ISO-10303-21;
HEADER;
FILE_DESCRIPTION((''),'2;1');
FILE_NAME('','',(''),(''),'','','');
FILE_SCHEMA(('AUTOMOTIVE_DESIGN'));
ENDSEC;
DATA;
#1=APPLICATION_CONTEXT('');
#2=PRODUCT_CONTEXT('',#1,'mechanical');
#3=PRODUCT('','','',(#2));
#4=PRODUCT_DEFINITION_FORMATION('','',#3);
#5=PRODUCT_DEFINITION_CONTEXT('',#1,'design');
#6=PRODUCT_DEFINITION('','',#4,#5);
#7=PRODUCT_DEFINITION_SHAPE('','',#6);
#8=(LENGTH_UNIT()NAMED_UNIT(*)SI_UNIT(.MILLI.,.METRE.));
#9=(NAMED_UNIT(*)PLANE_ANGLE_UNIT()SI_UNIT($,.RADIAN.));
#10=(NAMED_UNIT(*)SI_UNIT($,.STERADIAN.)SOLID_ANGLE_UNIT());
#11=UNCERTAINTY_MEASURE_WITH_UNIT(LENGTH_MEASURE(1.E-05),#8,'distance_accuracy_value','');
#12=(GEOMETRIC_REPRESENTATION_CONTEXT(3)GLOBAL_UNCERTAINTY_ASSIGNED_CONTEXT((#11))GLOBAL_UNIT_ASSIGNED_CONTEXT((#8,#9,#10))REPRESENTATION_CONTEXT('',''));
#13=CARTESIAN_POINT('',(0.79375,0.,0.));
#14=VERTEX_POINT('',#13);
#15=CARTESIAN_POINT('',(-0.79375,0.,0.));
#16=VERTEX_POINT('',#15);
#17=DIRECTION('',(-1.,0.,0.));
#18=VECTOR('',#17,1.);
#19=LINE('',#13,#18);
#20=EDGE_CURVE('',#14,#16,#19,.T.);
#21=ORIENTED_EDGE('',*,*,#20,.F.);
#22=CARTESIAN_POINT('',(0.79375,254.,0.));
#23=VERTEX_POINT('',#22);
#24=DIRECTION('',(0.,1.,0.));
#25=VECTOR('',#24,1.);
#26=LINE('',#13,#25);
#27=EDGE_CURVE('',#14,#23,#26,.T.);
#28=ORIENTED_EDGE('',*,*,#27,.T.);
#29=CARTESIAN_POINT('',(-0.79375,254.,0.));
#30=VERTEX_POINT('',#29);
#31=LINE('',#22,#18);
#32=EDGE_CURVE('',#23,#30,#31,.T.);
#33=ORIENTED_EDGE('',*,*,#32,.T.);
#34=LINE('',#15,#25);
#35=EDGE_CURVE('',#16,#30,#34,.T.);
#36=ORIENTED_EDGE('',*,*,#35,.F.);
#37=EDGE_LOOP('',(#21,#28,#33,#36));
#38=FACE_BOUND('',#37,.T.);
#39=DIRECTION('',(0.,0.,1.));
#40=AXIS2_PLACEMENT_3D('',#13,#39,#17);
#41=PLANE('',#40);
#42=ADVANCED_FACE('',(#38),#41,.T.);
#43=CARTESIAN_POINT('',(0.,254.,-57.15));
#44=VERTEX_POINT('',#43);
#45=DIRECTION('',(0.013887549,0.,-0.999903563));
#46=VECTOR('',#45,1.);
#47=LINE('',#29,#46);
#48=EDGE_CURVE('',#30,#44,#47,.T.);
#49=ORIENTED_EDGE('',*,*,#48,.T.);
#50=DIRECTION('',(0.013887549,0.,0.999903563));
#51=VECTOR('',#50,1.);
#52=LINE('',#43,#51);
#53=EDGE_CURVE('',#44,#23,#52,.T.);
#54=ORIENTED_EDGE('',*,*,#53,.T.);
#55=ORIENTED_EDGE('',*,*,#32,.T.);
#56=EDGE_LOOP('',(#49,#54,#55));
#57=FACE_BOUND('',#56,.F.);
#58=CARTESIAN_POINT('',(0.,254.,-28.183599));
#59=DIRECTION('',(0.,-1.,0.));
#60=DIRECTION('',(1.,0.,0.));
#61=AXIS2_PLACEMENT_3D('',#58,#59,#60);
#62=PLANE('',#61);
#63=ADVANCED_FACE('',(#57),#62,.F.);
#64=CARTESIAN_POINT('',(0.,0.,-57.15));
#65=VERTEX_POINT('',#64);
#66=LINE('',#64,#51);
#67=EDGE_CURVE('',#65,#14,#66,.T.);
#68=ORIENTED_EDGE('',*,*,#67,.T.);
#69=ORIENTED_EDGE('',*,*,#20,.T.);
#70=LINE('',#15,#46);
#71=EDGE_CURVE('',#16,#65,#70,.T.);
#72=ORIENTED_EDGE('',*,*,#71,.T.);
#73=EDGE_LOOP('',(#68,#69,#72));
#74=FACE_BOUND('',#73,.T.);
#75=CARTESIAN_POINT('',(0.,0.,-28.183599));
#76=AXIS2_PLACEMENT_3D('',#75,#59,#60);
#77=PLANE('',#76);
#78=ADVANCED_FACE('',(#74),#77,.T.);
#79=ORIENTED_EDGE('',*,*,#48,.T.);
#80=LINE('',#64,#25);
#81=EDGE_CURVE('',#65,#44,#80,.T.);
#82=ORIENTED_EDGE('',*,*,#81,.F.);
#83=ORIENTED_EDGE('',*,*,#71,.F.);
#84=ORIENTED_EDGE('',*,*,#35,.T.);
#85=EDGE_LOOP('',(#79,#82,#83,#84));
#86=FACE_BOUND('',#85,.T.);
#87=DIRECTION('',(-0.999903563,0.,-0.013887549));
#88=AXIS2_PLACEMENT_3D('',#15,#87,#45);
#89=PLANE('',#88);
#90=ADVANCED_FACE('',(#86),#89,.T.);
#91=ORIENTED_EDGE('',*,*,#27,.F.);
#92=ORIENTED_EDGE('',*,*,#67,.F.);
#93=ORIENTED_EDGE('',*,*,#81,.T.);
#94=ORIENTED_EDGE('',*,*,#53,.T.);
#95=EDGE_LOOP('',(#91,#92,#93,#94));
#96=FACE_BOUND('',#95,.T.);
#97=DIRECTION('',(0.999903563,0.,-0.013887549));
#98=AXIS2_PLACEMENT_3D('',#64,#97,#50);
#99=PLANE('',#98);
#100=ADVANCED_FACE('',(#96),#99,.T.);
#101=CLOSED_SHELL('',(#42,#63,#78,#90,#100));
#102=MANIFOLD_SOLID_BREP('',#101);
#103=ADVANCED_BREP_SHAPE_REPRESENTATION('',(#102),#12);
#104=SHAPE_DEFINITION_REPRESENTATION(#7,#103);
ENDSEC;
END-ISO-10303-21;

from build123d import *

# Parameters (mm, degrees)
F4_DEPTH = 254


# Not quite as in the source:
# - the program builds the solid bodies; features that only make, move or delete a surface that nothing else refers to are left out


with BuildPart() as f4:
    # F0 (on Front) → F4 (new body, through all)
    with BuildSketch(Plane.XZ):
        Polygon((0.79375, 0), (-0.79375, 0), (0, -57.15), align=None)
    extrude(amount=-F4_DEPTH)


solid = f4.part
